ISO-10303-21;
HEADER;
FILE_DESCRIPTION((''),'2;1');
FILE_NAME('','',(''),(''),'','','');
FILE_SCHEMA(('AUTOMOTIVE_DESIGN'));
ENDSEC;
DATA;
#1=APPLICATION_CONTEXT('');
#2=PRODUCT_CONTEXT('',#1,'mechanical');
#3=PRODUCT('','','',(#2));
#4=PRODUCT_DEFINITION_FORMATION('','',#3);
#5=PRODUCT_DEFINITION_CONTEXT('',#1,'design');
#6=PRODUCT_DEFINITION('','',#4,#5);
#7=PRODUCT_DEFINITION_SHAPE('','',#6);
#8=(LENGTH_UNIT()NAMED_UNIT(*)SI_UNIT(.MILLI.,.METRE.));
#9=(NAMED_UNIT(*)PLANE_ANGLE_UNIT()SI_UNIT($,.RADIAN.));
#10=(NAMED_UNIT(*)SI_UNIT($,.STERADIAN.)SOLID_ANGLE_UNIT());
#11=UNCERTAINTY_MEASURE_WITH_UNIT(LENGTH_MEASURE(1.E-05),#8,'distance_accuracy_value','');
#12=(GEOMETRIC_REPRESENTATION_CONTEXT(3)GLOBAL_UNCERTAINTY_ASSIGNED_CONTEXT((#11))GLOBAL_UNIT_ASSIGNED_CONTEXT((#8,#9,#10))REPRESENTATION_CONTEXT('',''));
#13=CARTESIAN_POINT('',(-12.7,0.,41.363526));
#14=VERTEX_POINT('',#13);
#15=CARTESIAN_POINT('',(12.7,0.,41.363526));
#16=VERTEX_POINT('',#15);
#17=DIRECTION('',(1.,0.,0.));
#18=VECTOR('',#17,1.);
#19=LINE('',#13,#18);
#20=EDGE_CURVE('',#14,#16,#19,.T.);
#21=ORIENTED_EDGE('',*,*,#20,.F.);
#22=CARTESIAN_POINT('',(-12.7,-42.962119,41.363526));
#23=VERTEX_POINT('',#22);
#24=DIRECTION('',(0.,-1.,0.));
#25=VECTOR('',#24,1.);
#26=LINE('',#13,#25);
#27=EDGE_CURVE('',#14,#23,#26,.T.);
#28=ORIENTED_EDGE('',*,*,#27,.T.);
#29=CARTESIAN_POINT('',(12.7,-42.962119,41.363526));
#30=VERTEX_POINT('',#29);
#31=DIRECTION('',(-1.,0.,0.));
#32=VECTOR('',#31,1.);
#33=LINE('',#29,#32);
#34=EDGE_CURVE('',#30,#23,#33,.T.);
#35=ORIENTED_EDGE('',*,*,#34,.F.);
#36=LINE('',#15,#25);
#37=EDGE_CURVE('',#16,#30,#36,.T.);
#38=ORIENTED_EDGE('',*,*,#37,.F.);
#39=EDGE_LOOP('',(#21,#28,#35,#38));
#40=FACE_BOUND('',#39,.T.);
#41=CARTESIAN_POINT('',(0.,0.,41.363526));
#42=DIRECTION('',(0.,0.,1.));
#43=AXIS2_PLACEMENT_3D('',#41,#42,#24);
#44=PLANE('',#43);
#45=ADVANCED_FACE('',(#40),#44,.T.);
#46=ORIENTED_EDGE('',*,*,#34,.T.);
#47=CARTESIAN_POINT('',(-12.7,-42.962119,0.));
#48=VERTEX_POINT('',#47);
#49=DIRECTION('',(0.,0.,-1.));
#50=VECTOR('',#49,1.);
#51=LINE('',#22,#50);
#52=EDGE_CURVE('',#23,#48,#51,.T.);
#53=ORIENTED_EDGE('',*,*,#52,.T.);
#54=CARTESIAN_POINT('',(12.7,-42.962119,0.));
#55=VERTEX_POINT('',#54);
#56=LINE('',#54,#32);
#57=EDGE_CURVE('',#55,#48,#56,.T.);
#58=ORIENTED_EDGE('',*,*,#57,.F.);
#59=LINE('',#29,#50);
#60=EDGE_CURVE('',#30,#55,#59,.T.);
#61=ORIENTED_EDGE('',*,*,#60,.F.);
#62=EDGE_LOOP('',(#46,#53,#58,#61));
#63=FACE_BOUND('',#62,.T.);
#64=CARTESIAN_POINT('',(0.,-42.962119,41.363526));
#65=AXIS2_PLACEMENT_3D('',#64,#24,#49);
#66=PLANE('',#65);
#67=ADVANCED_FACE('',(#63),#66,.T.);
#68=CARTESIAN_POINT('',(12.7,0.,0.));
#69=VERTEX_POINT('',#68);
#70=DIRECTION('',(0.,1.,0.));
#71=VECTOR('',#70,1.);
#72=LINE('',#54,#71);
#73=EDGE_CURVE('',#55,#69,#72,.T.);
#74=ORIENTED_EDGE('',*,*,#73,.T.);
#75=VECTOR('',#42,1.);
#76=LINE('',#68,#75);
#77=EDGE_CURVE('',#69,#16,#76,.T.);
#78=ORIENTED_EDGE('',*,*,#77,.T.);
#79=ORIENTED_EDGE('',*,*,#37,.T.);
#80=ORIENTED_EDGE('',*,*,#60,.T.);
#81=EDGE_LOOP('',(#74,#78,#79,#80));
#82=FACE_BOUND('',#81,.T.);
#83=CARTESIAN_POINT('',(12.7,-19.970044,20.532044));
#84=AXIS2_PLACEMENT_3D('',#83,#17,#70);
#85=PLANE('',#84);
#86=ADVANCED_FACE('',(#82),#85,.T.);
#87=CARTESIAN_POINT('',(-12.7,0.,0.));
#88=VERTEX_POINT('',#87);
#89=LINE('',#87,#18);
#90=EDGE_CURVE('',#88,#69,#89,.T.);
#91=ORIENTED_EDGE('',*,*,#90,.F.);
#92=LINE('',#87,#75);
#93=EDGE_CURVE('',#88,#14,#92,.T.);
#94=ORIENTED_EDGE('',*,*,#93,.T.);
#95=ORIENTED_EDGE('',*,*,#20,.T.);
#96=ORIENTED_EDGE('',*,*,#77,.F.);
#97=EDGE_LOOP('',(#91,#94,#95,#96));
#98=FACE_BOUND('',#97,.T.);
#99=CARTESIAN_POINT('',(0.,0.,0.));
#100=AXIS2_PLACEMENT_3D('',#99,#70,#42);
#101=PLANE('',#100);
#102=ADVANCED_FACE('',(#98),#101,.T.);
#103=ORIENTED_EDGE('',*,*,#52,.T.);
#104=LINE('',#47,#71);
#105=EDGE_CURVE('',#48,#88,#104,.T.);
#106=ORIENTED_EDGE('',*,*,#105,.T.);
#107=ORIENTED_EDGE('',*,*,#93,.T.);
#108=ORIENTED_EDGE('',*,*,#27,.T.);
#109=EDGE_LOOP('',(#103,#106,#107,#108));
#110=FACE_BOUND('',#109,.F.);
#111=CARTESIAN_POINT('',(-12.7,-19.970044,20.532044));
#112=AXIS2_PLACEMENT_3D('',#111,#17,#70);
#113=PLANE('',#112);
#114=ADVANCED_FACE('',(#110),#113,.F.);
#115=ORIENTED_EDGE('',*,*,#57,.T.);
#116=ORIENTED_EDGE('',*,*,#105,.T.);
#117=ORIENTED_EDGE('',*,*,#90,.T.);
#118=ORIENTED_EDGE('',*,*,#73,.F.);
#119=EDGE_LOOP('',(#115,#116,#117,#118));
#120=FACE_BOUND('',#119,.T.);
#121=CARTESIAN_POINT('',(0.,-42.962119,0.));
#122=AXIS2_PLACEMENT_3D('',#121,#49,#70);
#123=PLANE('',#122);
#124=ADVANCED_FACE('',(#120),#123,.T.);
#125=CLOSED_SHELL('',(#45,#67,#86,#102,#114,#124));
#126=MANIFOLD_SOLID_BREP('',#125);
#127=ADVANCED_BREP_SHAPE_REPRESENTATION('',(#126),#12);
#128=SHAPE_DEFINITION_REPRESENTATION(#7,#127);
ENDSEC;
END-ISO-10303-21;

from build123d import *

# Parameters (mm, degrees)
F1_DEPTH = 12.7


# Not quite as in the source:
# - the program builds the solid bodies; features that only make, move or delete a surface that nothing else refers to are left out


with BuildPart() as f1:
    # F0 (on Right) → F1 (new body, symmetric)
    with BuildSketch(Plane.YZ):
        with BuildLine():
            Line((-42.9621189833, 0), (0, 0))
            Line((0, 0), (0, 15.7109107822))
            Line((0, 15.7109107822), (-7.3093525134, 15.7109107822))
            ThreePointArc((-7.3093525134, 15.7109107822), (-19.2494977024, 19.8276732117), (-7.3093525134, 23.9444356412))
            Line((-7.3093525134, 23.9444356412), (0, 23.9444356412))
            Line((0, 23.9444356412), (0, 41.3635261357))
            Line((0, 41.3635261357), (-42.9621189833, 41.3635261357))
            Line((-42.9621189833, 41.3635261357), (-42.9621189833, 0))
        make_face()
        with BuildLine():
            Line((-7.3093525134, 15.7109107822), (0, 15.7109107822))
            Line((0, 15.7109107822), (0, 23.9444356412))
            Line((0, 23.9444356412), (-7.3093525134, 23.9444356412))
            ThreePointArc((-7.3093525134, 23.9444356412), (-19.2494977024, 19.8276732117), (-7.3093525134, 15.7109107822))
        make_face()
    extrude(amount=F1_DEPTH, both=True)


solid = f1.part
